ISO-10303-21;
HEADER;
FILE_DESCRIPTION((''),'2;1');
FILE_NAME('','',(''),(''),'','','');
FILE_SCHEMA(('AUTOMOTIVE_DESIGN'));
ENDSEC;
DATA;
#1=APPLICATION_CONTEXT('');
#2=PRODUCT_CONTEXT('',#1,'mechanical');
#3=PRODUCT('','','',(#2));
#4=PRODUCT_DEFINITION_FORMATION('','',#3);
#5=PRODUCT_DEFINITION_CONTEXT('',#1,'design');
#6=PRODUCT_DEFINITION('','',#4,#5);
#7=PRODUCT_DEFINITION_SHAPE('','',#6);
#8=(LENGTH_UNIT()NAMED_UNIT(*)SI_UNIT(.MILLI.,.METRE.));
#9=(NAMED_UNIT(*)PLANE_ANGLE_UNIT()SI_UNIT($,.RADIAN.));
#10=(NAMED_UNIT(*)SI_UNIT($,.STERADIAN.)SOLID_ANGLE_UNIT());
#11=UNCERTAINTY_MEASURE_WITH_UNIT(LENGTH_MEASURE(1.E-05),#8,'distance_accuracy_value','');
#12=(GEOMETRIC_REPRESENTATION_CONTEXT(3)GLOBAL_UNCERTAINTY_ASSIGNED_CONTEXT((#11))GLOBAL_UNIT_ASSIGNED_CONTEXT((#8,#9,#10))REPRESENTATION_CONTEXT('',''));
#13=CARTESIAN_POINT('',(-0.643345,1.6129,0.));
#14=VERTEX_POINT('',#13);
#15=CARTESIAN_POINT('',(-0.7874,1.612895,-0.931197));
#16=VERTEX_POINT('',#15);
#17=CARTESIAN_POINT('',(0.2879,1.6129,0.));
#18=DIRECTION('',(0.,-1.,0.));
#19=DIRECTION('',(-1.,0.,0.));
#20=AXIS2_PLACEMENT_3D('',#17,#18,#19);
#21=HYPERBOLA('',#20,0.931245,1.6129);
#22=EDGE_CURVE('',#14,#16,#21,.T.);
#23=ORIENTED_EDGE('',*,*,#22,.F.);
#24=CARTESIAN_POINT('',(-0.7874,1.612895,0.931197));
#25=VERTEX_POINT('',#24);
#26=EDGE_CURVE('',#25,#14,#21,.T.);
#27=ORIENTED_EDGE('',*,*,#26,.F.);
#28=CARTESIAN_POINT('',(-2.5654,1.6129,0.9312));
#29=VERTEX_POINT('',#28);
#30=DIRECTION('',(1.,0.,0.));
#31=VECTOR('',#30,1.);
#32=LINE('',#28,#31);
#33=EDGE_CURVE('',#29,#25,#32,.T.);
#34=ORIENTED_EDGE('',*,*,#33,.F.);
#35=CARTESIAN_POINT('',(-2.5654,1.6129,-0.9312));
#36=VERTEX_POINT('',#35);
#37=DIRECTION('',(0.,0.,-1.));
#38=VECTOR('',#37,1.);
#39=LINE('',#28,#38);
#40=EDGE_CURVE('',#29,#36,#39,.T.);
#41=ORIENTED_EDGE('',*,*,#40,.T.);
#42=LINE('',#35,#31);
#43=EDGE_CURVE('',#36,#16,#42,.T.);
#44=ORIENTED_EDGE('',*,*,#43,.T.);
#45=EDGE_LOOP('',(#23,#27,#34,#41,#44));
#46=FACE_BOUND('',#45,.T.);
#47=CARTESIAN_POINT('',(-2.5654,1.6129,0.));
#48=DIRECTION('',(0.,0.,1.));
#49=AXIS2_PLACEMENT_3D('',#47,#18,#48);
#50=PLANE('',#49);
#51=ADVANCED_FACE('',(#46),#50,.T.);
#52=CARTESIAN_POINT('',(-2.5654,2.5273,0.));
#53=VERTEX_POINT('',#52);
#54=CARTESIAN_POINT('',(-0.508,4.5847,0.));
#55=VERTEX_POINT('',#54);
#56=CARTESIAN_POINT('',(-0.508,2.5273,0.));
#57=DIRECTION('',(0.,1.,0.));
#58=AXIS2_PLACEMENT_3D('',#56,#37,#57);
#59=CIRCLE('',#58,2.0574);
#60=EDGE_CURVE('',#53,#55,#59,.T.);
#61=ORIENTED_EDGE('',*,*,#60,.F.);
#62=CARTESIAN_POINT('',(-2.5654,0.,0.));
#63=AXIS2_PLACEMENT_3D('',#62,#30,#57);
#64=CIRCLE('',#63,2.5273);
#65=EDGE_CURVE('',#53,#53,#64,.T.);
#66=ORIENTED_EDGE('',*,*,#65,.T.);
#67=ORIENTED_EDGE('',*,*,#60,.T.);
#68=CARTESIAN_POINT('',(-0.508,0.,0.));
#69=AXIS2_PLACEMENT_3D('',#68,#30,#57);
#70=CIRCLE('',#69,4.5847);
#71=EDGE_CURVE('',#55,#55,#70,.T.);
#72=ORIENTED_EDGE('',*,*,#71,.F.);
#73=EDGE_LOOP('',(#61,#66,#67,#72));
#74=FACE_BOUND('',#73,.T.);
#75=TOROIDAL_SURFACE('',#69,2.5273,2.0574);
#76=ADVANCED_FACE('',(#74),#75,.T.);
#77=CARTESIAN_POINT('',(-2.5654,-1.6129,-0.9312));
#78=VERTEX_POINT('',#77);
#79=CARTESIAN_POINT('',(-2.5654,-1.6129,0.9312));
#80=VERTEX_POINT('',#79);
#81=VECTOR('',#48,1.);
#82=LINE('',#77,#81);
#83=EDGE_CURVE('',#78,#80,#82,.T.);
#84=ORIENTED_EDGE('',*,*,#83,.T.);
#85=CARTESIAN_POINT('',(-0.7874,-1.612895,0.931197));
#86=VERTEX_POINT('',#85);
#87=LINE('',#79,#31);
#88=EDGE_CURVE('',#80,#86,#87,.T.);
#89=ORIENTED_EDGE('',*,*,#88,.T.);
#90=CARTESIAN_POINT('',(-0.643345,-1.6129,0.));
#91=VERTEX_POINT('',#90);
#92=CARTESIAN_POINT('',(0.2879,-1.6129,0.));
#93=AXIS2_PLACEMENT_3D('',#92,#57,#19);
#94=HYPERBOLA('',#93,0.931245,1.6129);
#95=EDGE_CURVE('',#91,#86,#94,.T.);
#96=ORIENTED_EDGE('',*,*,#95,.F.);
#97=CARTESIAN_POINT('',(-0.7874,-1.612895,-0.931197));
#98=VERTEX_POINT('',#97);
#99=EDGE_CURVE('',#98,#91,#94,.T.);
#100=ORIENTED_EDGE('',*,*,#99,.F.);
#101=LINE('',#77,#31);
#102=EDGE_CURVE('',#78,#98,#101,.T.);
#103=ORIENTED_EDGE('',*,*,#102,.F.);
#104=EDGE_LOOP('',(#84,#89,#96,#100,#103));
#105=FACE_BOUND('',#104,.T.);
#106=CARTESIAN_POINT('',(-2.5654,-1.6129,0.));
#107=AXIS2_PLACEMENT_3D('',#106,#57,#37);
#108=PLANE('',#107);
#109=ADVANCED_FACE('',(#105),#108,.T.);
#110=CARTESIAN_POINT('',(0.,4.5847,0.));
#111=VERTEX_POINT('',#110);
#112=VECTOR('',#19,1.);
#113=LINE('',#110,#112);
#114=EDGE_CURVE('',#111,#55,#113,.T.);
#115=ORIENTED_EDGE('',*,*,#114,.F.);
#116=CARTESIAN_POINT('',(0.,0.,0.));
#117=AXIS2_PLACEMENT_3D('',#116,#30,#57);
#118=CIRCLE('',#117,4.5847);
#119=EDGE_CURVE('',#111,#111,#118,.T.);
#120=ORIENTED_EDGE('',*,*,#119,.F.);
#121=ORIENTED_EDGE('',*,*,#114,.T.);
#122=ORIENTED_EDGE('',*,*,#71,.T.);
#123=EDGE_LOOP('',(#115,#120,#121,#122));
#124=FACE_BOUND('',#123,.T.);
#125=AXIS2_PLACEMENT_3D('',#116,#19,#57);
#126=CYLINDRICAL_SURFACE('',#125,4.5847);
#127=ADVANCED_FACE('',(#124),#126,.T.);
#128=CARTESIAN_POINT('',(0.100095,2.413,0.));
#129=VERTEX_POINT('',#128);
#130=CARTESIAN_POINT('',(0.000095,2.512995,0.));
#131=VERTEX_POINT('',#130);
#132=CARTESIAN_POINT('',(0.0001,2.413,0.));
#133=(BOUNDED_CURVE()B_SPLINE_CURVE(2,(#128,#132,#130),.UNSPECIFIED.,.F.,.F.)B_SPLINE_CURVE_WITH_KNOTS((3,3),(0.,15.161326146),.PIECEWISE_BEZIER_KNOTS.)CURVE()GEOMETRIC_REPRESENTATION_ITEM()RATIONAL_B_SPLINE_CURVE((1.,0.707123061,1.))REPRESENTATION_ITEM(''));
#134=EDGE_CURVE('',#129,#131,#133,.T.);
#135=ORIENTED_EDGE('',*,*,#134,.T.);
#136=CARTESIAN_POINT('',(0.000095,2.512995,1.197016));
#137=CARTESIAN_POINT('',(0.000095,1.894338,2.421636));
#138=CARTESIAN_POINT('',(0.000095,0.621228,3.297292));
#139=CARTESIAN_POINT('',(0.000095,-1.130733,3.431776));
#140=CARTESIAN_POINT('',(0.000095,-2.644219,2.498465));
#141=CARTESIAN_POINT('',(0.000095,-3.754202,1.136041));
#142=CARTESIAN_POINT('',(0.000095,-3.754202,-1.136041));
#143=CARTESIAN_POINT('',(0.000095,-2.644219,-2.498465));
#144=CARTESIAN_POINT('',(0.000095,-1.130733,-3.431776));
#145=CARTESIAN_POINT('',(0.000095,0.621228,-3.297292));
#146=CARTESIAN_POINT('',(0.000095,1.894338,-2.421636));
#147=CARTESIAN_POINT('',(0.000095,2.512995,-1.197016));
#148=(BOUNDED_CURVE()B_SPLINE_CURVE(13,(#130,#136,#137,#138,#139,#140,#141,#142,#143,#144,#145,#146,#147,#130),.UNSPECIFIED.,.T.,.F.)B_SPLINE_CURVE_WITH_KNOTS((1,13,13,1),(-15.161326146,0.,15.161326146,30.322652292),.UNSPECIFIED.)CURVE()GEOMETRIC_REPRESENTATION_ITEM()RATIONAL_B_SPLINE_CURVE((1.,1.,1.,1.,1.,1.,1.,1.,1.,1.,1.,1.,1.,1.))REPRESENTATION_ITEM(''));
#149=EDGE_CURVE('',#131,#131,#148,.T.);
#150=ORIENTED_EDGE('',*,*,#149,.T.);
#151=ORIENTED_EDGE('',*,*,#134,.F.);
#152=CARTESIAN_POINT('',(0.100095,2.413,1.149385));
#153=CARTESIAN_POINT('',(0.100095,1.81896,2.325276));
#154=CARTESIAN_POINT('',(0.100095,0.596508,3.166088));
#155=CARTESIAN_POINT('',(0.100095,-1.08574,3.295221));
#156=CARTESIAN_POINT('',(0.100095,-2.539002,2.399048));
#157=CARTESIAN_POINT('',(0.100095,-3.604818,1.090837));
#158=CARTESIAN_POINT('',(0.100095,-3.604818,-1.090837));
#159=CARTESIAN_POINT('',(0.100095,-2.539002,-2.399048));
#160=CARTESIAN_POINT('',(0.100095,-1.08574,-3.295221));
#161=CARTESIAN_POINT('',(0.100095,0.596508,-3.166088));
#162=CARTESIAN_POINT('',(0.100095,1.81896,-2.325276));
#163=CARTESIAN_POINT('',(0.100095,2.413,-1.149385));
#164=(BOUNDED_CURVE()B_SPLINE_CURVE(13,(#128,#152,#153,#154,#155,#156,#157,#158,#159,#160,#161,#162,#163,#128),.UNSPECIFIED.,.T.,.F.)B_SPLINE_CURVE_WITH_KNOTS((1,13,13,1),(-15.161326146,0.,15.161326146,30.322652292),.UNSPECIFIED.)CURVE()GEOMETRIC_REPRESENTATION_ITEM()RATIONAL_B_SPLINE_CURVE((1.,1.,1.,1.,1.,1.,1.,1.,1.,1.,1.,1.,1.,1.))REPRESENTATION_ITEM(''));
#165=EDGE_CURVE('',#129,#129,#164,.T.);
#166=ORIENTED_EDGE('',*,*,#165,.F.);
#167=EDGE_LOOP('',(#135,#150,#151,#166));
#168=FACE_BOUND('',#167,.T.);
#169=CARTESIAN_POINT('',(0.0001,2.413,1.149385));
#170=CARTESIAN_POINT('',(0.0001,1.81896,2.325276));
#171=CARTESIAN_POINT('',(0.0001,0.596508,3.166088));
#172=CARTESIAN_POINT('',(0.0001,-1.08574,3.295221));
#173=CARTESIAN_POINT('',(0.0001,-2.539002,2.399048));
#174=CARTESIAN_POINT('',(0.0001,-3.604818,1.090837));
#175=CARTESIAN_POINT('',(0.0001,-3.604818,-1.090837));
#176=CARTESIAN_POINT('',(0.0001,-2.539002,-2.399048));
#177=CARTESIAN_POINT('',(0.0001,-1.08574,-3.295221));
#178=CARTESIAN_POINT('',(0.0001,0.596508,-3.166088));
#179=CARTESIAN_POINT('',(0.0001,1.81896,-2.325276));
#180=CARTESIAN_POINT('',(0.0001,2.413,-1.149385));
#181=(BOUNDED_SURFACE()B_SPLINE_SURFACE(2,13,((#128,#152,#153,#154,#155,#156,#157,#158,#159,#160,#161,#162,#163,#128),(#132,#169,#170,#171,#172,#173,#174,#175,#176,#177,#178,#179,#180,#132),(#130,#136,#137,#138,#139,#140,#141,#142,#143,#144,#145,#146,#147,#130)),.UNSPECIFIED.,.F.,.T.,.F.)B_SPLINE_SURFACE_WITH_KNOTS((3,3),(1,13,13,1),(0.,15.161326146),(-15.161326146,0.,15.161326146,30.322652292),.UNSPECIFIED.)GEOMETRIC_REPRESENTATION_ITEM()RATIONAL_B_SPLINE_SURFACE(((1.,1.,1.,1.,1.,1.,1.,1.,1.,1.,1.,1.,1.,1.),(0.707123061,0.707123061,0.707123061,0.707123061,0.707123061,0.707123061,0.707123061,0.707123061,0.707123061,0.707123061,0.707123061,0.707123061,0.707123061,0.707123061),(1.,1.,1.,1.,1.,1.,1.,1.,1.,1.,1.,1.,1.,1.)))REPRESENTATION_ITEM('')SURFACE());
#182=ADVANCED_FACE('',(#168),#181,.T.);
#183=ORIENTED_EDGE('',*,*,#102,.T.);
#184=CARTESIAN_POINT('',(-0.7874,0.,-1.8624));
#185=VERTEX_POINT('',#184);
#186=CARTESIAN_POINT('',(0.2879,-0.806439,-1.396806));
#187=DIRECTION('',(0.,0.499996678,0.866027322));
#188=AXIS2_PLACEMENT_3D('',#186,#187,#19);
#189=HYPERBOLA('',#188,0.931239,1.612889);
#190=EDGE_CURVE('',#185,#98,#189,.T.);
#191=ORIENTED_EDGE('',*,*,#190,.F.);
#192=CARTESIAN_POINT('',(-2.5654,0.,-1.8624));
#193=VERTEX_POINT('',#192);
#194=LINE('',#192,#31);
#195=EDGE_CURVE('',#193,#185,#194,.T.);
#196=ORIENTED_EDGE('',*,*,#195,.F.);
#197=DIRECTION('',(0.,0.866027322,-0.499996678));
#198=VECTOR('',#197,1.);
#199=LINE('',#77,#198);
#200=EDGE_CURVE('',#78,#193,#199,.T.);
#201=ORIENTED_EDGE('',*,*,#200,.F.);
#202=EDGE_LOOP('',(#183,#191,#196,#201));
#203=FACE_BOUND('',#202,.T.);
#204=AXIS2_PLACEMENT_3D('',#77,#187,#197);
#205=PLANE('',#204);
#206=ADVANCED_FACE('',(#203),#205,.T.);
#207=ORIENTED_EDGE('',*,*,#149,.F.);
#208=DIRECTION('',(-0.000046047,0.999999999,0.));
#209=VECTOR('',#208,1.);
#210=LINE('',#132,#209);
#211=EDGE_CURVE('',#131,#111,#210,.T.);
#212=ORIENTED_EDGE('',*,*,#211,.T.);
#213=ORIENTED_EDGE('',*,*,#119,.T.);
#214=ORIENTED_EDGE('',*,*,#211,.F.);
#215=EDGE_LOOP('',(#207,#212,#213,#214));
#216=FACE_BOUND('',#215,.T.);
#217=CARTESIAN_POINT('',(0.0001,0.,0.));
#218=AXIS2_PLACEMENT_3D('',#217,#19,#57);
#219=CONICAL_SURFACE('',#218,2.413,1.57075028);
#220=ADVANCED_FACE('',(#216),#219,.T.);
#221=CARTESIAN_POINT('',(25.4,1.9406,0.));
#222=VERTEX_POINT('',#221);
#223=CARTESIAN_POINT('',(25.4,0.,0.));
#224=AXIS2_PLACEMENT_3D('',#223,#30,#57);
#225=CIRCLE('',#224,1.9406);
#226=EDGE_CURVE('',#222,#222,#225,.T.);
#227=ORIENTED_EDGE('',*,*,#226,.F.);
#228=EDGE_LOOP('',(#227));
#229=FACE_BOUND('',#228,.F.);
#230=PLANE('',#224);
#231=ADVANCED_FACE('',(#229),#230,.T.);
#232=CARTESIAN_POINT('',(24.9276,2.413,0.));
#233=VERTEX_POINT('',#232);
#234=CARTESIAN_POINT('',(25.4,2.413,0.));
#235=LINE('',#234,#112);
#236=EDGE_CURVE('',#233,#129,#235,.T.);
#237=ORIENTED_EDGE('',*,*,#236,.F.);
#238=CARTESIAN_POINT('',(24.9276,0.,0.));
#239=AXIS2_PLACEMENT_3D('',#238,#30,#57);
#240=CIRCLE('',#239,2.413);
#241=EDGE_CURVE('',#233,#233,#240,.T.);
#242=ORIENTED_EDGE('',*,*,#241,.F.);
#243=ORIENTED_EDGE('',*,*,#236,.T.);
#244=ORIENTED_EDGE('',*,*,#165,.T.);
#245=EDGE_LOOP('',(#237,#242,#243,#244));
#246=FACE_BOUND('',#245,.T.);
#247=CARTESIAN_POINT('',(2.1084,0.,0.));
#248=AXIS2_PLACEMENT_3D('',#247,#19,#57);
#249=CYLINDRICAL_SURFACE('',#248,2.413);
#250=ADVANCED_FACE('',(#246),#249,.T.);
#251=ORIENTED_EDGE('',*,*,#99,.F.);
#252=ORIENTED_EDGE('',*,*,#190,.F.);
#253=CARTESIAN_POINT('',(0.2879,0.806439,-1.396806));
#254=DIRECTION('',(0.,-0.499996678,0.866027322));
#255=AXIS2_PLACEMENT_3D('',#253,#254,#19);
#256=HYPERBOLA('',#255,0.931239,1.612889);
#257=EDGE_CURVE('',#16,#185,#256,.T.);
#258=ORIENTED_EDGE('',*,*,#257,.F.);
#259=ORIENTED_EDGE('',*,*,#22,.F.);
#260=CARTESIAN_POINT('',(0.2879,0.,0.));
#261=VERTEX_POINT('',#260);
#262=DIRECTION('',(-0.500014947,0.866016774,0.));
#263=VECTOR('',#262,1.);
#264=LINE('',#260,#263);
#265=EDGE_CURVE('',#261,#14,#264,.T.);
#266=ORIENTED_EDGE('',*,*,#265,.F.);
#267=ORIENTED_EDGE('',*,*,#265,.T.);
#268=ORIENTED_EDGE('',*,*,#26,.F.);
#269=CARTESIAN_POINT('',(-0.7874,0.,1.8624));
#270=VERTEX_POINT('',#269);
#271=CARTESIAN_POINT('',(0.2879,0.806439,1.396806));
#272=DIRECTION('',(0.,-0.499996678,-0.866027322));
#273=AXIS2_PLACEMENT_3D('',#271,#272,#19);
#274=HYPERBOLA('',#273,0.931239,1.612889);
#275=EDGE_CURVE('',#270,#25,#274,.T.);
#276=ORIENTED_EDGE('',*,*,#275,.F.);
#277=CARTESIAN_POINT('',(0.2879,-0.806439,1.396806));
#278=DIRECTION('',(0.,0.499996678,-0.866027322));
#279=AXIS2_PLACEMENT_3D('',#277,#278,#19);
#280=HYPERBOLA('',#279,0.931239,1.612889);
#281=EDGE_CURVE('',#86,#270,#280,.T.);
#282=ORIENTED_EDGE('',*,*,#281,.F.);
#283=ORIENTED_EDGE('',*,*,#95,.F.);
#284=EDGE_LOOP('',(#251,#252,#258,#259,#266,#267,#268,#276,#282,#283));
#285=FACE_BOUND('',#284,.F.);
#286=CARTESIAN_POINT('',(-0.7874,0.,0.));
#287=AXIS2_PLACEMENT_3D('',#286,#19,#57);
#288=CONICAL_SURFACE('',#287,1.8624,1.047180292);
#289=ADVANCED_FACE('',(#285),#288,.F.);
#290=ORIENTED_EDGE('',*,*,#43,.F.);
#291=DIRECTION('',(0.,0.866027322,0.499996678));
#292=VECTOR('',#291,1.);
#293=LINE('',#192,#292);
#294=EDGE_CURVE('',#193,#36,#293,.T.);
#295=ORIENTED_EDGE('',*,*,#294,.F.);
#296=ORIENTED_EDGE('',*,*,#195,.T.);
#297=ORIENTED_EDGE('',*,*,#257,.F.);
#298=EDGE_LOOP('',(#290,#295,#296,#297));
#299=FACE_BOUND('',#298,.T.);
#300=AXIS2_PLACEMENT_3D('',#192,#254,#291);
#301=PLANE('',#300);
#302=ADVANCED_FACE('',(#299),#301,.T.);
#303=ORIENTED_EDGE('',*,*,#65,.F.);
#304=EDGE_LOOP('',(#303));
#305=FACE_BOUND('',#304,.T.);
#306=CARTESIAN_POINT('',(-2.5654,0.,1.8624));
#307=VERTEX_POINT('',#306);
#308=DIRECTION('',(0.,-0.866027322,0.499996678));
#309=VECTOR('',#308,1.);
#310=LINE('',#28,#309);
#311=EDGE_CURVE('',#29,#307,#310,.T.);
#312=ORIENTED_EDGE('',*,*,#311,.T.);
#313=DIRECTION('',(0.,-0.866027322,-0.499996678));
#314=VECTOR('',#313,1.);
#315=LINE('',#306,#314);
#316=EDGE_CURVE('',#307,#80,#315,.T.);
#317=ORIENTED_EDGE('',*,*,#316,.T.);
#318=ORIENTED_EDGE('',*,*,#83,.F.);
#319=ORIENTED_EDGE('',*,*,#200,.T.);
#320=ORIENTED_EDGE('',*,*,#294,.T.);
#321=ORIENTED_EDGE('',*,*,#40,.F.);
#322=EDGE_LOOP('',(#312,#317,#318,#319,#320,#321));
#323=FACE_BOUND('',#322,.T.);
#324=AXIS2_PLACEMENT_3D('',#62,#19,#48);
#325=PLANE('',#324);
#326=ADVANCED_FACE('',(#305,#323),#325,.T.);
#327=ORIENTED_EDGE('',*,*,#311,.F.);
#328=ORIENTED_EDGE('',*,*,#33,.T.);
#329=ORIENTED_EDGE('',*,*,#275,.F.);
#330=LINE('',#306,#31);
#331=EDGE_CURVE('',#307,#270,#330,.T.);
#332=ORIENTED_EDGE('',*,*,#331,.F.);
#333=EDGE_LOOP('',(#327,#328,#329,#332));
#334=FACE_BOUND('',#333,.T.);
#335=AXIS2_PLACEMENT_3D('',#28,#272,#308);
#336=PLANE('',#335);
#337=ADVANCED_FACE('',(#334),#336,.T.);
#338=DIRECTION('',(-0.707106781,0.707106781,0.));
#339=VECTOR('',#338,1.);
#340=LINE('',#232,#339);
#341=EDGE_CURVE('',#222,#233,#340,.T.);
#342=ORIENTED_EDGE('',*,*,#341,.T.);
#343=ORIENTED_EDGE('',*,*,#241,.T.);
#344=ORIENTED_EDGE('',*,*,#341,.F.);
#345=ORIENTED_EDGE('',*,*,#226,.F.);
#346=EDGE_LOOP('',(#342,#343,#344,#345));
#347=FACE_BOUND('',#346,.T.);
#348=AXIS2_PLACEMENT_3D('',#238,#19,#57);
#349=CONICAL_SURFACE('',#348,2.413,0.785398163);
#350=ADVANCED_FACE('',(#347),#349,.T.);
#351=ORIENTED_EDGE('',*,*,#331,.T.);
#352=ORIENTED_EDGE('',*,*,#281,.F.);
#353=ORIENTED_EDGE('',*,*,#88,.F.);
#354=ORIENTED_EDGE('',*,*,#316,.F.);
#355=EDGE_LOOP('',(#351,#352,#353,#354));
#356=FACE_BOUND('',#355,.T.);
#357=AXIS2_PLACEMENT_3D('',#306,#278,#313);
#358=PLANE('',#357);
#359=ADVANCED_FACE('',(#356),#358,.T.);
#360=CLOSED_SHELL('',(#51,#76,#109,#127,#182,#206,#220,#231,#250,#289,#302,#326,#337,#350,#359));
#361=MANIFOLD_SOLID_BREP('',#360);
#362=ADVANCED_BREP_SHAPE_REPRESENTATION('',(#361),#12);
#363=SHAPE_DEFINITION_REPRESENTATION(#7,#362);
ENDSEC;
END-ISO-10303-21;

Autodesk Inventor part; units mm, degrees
ref_plane "YZ Plane" through (0, 0, 0) normal (1, 0, 0) x (0, 1, 0)
ref_plane "XZ Plane" through (0, 0, 0) normal (0, 1, 0) x (-1, 0, 0)
sketch "Sketch1" plane through (0, 0, 0) normal (0, 0, 1) x (1, 0, 0)
  line L0 (0.2879, 0) -> (25.4, 0)
  line L1 (25.4, 0) -> (25.4, 2.413)
  line L2 (25.4, 2.413) -> (2.1084, 2.413)
  line L3 (2.1084, 2.413) -> (0.0001, 2.413)
  line L4 (0.0001, 2.413) -> (0, 2.413)
  line L5 (0, 2.413) -> (0, 4.5847)
  line L6 (0, 4.5847) -> (-2.5654, 4.5847)
  line L7 (-2.5654, 4.5847) -> (-2.5654, 1.8624)
  line L8 (-2.5654, 1.8624) -> (-0.7874, 1.8624)
  line L9 (-0.7874, 1.8624) -> (0.2879, 0)
  line L10 (-8.1585, 0) -> (30.9931, 0) projected
  line L11 (0, -0.9169) -> (0, 5.5016) projected
  line L12 (2.1084, 2.413) -> (0, 2.413) construction
  dimension "d1" = 23.2916
  dimension "d2" = 2.1083
  dimension "d3" = 2.5654
  dimension "d4" = 1.778
  dimension "d5" = 60
  dimension "d6" = 4.826
  dimension "d7" = 4.826
  dimension "d8" = 3.7248
  dimension "d9" = 9.1694
  dimension "d26" = 25.4
revolve "Body" add sketch "Sketch1" angle 360 about axis through (0.2879, 0, 0) along (1, 0, 0) contours L9 L11 L3 L2 L1 L0 | L9 L8 L7 L6 L5 L11
sketch "Sketch2" plane through (-2.5654, 0, 0) normal (-1, 0, 0) x (0, 0, 1)
  circle A0 centre (0, 0) radius 1.8624 projected
  line L0 (0, -6.4186) -> (0, 6.4186) projected
  line L1 (-6.4186, 0) -> (6.4186, 0) projected
  line L2 (1.8624, 0) -> (0.9312, -1.6129)
  line L3 (0.9312, -1.6129) -> (-0.9312, -1.6129)
  line L4 (-0.9312, -1.6129) -> (-1.8624, 0)
  line L5 (-1.8624, 0) -> (-0.9312, 1.6129)
  line L6 (-0.9312, 1.6129) -> (0.9312, 1.6129)
  line L7 (0.9312, 1.6129) -> (1.8624, 0)
extrude "Slot" add sketch "Sketch2" against normal up to next contours L7 A0 | A0 L2 | L6 L0 A0 | A0 L0 L3 | L0 L6 A0 | A0 L3 L0 | L4 A0 | A0 L5
fillet "Fillet1" radius 2.0574 1 edges at (-2.5654, -4.5847, 0)
thread "Thread" size "10-32 UNF" class "2A" standard "ANSI Unified Screw Threads" length 23.2916
chamfer "Chamfer1" distance 0.4724 distance2 0.4724 1 edges at (25.4, -2.413, 0) measured on face at (25.4, 0.9527, 0.2826)
ref_plane "Work Plane1" through (29, 0, 0) normal (0, -1, 0) x (1, 0, 0)
fillet "Fillet2" radius 0.1 1 edges at (0.0001, -2.413, 0)
equation "\"d30\" = R"
equation "\"d17\" = RR"
equation "\"d13\" = GEL"
equation "\"d15\" = -0.5 * SPD + 0.5 * GD"
equation "\"d16\" = GUL"
equation "\"d1\" = GEL"
equation "\"d3\" = KOH"
equation "\"d4\" = INTI"
equation "\"d6\" = GD"
equation "\"d7\" = BDM"
equation "\"d8\" = 1.1547 * SW"
equation "\"d9\" = KOD"
equation "\"d26\" = NLG"
equation "\"GD\" = NND"
equation "\"NLG\" = 25.4"
equation "\"GEL\" = 23.2916"
equation "\"KOD\" = 9.1694"
equation "\"KOH\" = 2.5654"
equation "\"INTI\" = 1.778"
equation "\"GAL\" = 2.1082"
equation "\"GUL\" = 0.47244"
equation "\"BDM\" = NND"
equation "\"SW\" = 3.2258"
equation "\"RR\" = 2.0574"
equation "\"SPD\" = 3.88112"
equation "\"R\" = 0.1"
equation "\"TOA\" = 30deg"
equation "\"GD1\" = SPD"
equation "\"THREADDIA\" = 4.826"
equation "\"KOH1\" = 0.508"
equation "\"NND\" = 4.826"
equation "\"E0\" = 3.72593"
properties part number "ANSI B18.3 - No. 10-32 - 1, HSBHCSI" material "Steel, Mild"
